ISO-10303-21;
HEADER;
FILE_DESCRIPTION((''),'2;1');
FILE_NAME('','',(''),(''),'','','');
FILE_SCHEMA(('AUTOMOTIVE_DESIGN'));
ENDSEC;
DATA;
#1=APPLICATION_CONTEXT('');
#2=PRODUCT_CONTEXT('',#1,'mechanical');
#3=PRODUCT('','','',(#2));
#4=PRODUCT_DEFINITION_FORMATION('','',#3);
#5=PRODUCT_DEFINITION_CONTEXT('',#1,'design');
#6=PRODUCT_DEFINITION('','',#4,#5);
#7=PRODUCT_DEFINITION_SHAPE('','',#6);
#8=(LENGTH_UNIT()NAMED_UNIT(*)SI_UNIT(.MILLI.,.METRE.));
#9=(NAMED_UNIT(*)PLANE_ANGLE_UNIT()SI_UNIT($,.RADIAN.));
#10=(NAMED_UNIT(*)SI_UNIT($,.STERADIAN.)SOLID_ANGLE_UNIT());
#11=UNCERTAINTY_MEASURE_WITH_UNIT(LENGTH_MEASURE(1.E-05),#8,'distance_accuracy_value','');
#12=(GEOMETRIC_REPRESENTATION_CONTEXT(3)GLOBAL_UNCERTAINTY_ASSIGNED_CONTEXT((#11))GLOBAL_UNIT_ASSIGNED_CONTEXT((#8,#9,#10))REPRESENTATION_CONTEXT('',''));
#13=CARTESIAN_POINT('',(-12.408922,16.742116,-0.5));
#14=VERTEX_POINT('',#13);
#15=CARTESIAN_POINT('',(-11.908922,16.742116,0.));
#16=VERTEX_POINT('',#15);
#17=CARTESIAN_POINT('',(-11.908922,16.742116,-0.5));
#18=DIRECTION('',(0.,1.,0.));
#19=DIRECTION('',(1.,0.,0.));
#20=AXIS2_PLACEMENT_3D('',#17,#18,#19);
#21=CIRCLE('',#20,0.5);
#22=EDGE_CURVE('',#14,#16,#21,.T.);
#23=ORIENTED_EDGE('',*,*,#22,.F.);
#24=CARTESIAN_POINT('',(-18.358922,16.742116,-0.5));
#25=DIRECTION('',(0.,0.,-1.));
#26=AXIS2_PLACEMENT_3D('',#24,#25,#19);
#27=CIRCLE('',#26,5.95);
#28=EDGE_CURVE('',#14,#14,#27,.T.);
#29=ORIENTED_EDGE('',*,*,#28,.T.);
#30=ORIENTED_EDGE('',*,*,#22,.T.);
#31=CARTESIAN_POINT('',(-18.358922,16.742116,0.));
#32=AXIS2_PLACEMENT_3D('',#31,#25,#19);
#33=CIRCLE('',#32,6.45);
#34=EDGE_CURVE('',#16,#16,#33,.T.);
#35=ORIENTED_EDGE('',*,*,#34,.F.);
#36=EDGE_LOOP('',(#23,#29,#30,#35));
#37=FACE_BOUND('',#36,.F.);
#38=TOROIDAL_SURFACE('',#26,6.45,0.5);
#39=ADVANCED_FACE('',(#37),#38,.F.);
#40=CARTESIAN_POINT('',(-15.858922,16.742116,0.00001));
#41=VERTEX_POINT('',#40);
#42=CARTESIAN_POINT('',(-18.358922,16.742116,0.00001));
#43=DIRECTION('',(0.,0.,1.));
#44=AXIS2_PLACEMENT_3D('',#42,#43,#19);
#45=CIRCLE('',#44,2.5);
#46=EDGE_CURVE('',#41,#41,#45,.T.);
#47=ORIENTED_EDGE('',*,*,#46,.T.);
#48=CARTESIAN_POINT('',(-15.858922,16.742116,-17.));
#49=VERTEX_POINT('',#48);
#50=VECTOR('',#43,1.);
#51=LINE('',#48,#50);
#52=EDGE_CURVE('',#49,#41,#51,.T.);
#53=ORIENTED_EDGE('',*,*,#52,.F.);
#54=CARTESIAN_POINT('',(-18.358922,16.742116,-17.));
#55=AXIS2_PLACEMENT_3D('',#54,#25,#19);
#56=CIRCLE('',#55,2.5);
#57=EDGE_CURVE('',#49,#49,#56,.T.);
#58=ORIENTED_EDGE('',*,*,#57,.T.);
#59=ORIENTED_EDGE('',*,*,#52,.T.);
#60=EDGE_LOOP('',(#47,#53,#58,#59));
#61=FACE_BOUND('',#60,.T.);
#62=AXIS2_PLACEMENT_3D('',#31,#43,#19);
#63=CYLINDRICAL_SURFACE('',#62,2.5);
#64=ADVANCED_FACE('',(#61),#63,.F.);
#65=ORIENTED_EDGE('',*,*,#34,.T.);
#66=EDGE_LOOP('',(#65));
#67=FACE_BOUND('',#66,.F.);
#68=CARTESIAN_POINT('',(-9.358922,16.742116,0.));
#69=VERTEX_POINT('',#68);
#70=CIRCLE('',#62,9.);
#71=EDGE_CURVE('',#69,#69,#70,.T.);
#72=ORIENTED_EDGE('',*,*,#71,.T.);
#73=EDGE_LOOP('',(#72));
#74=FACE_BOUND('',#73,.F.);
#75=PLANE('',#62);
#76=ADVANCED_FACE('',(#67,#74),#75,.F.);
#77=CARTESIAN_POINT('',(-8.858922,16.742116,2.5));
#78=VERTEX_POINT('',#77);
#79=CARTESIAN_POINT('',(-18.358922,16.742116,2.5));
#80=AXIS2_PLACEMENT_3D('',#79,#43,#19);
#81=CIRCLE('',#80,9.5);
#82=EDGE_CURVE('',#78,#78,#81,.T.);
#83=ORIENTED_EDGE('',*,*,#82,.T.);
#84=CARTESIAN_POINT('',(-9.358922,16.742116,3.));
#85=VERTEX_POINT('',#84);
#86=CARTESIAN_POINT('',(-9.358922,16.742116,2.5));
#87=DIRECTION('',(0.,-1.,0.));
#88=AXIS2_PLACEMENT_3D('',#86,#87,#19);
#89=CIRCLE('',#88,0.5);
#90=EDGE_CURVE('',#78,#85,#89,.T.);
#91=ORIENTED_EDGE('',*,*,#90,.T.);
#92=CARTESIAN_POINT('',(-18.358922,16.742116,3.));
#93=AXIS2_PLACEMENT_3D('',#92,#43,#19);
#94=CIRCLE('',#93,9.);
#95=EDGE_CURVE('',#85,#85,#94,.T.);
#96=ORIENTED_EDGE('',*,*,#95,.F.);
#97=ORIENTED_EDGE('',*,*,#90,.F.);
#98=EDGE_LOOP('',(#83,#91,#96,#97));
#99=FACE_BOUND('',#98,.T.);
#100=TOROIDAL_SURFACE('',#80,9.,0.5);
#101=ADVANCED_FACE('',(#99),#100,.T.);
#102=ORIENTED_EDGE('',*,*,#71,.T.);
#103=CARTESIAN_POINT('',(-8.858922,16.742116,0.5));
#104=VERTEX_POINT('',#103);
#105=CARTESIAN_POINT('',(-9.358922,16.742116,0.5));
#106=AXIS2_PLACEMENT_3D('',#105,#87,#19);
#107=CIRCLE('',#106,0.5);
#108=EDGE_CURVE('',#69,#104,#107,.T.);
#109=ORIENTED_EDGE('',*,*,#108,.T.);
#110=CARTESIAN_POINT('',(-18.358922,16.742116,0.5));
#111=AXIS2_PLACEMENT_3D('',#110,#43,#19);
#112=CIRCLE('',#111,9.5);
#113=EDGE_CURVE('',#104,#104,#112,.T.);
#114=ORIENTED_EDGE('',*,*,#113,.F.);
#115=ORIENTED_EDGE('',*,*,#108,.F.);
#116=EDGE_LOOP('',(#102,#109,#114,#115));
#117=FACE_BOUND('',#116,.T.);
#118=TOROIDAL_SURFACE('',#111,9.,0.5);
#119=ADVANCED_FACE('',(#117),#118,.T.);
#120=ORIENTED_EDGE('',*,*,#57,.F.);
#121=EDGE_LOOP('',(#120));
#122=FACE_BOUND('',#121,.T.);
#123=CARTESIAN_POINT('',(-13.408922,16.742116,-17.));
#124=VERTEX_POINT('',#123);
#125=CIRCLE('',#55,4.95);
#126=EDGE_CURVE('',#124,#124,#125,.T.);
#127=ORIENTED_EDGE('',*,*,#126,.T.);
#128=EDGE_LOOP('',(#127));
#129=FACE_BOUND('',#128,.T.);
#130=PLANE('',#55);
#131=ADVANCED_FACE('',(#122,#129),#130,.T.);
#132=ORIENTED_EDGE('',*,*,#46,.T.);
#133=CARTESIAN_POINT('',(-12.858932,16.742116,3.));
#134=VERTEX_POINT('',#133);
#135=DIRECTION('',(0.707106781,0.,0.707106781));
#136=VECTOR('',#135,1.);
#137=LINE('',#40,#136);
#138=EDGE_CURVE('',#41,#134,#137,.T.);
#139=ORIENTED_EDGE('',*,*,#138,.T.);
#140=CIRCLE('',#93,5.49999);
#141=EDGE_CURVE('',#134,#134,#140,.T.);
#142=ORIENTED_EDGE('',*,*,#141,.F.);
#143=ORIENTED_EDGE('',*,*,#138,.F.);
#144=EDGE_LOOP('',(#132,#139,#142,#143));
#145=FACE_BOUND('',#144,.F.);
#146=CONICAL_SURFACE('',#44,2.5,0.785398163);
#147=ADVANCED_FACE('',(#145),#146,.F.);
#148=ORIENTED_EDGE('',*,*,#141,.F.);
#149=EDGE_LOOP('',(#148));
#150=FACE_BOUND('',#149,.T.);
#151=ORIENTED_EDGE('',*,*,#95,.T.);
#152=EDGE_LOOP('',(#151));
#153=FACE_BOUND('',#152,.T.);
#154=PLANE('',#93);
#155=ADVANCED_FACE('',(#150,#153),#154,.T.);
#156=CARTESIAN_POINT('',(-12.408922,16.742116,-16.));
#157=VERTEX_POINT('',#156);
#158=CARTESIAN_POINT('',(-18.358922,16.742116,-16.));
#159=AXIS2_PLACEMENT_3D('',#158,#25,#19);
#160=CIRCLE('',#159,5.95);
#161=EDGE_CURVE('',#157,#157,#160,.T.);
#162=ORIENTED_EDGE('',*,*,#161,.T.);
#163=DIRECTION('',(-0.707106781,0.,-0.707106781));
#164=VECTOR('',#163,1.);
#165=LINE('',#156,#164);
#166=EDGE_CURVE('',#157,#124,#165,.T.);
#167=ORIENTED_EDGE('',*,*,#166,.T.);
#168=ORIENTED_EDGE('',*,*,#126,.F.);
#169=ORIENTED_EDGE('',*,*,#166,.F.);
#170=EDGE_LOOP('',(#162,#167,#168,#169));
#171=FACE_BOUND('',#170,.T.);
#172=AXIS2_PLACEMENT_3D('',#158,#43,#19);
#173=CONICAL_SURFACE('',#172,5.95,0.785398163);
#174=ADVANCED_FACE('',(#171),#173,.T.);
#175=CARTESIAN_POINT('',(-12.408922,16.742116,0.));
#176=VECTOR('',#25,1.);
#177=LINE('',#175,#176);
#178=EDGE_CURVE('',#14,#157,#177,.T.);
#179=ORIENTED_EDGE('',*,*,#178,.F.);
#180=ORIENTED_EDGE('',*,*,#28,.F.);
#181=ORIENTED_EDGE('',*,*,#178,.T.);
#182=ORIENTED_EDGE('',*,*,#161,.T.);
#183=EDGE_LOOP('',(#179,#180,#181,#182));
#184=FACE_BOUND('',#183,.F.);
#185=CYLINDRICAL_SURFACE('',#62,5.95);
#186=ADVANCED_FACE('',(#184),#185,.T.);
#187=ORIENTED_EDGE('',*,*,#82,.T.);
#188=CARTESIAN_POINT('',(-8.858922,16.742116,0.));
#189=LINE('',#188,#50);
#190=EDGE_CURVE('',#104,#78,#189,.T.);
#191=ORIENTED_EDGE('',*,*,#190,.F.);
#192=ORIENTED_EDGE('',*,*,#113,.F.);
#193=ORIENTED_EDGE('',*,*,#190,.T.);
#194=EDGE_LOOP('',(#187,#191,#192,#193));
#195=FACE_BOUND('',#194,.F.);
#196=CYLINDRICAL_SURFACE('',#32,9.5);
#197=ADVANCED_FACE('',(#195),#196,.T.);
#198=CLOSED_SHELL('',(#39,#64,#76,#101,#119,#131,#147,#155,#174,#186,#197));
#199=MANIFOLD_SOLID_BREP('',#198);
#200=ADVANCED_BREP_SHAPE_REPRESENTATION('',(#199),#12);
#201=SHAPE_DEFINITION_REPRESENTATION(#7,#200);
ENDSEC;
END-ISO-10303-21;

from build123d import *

# Parameters (mm, degrees)
F0_R     = 9.5
F0_R_2   = 2.5
F1_DEPTH = 3
F2_SIZE  = 2.99999
F3_R     = 5.95
F3_R_2   = 2.5
F4_DEPTH = 17
F5_SIZE  = 1
F6_R     = 0.5


# Not quite as in the source:
# - a fillet or chamfer is up to 0.001 mm smaller than in the source, because OpenCascade refuses the exact size
# - a feature names something its author has since deleted; it is built from what else it names


with BuildPart() as f1:
    # F0 (on Top) → F1 (new body)
    with BuildSketch(Plane.XY):
        with Locations((-18.3589216322, 16.7421158403)):
            Circle(F0_R)
        with Locations((-18.3589216322, 16.7421158403)):
            Circle(F0_R_2, mode=Mode.SUBTRACT)
    extrude(amount=F1_DEPTH)

    # F2 (size 3 in the source; OpenCascade refuses exactly that, so slightly less here)
    f2_edges = [f1.edges().sort_by_distance(p)[0] for p in [
        (-20.858922, 16.742116, 3),
    ]]
    chamfer(f2_edges, length=F2_SIZE)

    # F3 (on face) → F4 (join)
    with BuildSketch(Plane(origin=(0, 0, 0), x_dir=(1, 0, 0), z_dir=(0, 0, -1))):
        with Locations((-18.3589216322, -16.7421158403)):
            Circle(F3_R)
        with Locations((-18.3589216322, -16.7421158403)):
            Circle(F3_R_2, mode=Mode.SUBTRACT)
    extrude(amount=F4_DEPTH)

    # F5
    f5_edges = [f1.edges().sort_by_distance(p)[0] for p in [
        (-24.308922, 16.742116, -17),
    ]]
    chamfer(f5_edges, length=F5_SIZE)

    # F6
    f6_edges = [f1.edges().sort_by_distance(p)[0] for p in [
        (-27.858922, 16.742116, 0),
        (-27.858922, 16.742116, 3),
        (-24.308922, 16.742116, 0),
    ]]
    fillet(f6_edges, radius=F6_R)


solid = f1.part
